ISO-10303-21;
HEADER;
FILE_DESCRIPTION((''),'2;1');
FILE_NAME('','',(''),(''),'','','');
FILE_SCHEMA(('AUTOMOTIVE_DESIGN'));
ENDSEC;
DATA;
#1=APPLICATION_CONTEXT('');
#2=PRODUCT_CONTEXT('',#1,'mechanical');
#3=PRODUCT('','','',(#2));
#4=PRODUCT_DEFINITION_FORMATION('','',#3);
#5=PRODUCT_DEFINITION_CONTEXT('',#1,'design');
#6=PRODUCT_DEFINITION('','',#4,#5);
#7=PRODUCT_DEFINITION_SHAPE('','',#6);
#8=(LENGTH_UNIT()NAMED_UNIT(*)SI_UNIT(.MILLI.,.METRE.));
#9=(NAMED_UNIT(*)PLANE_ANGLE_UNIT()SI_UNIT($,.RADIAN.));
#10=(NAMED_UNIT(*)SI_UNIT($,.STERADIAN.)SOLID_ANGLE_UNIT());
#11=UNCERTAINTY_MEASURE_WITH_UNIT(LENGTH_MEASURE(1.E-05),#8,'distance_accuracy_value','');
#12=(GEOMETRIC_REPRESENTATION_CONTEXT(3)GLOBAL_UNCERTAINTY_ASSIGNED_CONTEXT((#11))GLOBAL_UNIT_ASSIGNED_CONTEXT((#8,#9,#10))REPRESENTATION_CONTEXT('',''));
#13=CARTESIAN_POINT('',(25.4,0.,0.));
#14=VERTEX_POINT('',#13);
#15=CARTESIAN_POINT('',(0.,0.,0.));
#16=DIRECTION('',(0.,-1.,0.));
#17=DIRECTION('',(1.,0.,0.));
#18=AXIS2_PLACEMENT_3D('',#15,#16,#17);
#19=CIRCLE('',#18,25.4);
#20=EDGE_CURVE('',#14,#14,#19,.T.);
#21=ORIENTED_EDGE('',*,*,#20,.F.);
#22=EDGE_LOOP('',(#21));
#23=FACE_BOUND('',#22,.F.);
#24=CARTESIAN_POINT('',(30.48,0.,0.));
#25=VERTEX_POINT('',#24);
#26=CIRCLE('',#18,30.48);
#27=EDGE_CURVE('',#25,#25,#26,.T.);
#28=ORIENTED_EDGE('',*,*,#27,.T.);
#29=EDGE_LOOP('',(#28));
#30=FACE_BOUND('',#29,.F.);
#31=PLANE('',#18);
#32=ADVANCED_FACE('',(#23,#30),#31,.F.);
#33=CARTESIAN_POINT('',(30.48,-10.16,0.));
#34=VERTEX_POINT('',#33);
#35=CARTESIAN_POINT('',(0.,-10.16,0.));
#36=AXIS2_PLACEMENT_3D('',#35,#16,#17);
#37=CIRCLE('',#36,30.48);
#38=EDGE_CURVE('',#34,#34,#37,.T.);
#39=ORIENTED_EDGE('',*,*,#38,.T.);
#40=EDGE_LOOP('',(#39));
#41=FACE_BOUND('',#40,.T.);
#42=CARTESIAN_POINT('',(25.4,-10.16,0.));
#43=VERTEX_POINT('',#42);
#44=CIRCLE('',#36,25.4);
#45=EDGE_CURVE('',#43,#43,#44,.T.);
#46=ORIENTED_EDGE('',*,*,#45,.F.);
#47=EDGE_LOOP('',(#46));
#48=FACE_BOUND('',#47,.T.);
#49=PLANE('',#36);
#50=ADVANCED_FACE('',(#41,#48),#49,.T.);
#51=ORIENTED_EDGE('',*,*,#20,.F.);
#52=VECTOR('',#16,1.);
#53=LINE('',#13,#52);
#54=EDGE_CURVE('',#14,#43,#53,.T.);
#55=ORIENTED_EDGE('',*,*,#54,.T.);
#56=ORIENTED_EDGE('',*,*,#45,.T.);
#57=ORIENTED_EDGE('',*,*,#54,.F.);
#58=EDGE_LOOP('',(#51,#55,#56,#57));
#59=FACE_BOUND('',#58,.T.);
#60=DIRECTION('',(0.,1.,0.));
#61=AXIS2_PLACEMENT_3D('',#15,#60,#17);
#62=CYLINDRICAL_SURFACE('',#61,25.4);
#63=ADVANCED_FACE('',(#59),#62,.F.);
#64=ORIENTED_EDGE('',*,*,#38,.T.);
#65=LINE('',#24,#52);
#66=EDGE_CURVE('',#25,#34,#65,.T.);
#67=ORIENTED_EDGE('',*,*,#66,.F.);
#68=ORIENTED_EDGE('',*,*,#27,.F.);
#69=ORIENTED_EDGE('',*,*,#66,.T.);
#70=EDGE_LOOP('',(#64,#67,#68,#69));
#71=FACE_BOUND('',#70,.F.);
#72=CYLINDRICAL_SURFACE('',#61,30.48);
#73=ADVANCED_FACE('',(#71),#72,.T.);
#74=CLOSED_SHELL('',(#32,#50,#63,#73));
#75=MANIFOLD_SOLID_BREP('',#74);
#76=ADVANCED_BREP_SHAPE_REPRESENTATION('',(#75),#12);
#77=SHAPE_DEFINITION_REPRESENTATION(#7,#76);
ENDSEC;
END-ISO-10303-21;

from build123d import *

# Parameters (mm, degrees)
F0_R     = 30.48
F0_R_2   = 27.94
F0_R_3   = 25.4
F1_DEPTH = 10.16


# Not quite as in the source:
# - a feature of the source that left no trace in its solid (it failed there, or was rolled back) is left out


with BuildPart() as f1:
    # F0 (on Front) → F1 (new body)
    with BuildSketch(Plane.XZ):
        Circle(F0_R)
        Circle(F0_R_2, mode=Mode.SUBTRACT)
        Circle(F0_R_2)
        Circle(F0_R_3, mode=Mode.SUBTRACT)
    extrude(amount=F1_DEPTH)


solid = f1.part
